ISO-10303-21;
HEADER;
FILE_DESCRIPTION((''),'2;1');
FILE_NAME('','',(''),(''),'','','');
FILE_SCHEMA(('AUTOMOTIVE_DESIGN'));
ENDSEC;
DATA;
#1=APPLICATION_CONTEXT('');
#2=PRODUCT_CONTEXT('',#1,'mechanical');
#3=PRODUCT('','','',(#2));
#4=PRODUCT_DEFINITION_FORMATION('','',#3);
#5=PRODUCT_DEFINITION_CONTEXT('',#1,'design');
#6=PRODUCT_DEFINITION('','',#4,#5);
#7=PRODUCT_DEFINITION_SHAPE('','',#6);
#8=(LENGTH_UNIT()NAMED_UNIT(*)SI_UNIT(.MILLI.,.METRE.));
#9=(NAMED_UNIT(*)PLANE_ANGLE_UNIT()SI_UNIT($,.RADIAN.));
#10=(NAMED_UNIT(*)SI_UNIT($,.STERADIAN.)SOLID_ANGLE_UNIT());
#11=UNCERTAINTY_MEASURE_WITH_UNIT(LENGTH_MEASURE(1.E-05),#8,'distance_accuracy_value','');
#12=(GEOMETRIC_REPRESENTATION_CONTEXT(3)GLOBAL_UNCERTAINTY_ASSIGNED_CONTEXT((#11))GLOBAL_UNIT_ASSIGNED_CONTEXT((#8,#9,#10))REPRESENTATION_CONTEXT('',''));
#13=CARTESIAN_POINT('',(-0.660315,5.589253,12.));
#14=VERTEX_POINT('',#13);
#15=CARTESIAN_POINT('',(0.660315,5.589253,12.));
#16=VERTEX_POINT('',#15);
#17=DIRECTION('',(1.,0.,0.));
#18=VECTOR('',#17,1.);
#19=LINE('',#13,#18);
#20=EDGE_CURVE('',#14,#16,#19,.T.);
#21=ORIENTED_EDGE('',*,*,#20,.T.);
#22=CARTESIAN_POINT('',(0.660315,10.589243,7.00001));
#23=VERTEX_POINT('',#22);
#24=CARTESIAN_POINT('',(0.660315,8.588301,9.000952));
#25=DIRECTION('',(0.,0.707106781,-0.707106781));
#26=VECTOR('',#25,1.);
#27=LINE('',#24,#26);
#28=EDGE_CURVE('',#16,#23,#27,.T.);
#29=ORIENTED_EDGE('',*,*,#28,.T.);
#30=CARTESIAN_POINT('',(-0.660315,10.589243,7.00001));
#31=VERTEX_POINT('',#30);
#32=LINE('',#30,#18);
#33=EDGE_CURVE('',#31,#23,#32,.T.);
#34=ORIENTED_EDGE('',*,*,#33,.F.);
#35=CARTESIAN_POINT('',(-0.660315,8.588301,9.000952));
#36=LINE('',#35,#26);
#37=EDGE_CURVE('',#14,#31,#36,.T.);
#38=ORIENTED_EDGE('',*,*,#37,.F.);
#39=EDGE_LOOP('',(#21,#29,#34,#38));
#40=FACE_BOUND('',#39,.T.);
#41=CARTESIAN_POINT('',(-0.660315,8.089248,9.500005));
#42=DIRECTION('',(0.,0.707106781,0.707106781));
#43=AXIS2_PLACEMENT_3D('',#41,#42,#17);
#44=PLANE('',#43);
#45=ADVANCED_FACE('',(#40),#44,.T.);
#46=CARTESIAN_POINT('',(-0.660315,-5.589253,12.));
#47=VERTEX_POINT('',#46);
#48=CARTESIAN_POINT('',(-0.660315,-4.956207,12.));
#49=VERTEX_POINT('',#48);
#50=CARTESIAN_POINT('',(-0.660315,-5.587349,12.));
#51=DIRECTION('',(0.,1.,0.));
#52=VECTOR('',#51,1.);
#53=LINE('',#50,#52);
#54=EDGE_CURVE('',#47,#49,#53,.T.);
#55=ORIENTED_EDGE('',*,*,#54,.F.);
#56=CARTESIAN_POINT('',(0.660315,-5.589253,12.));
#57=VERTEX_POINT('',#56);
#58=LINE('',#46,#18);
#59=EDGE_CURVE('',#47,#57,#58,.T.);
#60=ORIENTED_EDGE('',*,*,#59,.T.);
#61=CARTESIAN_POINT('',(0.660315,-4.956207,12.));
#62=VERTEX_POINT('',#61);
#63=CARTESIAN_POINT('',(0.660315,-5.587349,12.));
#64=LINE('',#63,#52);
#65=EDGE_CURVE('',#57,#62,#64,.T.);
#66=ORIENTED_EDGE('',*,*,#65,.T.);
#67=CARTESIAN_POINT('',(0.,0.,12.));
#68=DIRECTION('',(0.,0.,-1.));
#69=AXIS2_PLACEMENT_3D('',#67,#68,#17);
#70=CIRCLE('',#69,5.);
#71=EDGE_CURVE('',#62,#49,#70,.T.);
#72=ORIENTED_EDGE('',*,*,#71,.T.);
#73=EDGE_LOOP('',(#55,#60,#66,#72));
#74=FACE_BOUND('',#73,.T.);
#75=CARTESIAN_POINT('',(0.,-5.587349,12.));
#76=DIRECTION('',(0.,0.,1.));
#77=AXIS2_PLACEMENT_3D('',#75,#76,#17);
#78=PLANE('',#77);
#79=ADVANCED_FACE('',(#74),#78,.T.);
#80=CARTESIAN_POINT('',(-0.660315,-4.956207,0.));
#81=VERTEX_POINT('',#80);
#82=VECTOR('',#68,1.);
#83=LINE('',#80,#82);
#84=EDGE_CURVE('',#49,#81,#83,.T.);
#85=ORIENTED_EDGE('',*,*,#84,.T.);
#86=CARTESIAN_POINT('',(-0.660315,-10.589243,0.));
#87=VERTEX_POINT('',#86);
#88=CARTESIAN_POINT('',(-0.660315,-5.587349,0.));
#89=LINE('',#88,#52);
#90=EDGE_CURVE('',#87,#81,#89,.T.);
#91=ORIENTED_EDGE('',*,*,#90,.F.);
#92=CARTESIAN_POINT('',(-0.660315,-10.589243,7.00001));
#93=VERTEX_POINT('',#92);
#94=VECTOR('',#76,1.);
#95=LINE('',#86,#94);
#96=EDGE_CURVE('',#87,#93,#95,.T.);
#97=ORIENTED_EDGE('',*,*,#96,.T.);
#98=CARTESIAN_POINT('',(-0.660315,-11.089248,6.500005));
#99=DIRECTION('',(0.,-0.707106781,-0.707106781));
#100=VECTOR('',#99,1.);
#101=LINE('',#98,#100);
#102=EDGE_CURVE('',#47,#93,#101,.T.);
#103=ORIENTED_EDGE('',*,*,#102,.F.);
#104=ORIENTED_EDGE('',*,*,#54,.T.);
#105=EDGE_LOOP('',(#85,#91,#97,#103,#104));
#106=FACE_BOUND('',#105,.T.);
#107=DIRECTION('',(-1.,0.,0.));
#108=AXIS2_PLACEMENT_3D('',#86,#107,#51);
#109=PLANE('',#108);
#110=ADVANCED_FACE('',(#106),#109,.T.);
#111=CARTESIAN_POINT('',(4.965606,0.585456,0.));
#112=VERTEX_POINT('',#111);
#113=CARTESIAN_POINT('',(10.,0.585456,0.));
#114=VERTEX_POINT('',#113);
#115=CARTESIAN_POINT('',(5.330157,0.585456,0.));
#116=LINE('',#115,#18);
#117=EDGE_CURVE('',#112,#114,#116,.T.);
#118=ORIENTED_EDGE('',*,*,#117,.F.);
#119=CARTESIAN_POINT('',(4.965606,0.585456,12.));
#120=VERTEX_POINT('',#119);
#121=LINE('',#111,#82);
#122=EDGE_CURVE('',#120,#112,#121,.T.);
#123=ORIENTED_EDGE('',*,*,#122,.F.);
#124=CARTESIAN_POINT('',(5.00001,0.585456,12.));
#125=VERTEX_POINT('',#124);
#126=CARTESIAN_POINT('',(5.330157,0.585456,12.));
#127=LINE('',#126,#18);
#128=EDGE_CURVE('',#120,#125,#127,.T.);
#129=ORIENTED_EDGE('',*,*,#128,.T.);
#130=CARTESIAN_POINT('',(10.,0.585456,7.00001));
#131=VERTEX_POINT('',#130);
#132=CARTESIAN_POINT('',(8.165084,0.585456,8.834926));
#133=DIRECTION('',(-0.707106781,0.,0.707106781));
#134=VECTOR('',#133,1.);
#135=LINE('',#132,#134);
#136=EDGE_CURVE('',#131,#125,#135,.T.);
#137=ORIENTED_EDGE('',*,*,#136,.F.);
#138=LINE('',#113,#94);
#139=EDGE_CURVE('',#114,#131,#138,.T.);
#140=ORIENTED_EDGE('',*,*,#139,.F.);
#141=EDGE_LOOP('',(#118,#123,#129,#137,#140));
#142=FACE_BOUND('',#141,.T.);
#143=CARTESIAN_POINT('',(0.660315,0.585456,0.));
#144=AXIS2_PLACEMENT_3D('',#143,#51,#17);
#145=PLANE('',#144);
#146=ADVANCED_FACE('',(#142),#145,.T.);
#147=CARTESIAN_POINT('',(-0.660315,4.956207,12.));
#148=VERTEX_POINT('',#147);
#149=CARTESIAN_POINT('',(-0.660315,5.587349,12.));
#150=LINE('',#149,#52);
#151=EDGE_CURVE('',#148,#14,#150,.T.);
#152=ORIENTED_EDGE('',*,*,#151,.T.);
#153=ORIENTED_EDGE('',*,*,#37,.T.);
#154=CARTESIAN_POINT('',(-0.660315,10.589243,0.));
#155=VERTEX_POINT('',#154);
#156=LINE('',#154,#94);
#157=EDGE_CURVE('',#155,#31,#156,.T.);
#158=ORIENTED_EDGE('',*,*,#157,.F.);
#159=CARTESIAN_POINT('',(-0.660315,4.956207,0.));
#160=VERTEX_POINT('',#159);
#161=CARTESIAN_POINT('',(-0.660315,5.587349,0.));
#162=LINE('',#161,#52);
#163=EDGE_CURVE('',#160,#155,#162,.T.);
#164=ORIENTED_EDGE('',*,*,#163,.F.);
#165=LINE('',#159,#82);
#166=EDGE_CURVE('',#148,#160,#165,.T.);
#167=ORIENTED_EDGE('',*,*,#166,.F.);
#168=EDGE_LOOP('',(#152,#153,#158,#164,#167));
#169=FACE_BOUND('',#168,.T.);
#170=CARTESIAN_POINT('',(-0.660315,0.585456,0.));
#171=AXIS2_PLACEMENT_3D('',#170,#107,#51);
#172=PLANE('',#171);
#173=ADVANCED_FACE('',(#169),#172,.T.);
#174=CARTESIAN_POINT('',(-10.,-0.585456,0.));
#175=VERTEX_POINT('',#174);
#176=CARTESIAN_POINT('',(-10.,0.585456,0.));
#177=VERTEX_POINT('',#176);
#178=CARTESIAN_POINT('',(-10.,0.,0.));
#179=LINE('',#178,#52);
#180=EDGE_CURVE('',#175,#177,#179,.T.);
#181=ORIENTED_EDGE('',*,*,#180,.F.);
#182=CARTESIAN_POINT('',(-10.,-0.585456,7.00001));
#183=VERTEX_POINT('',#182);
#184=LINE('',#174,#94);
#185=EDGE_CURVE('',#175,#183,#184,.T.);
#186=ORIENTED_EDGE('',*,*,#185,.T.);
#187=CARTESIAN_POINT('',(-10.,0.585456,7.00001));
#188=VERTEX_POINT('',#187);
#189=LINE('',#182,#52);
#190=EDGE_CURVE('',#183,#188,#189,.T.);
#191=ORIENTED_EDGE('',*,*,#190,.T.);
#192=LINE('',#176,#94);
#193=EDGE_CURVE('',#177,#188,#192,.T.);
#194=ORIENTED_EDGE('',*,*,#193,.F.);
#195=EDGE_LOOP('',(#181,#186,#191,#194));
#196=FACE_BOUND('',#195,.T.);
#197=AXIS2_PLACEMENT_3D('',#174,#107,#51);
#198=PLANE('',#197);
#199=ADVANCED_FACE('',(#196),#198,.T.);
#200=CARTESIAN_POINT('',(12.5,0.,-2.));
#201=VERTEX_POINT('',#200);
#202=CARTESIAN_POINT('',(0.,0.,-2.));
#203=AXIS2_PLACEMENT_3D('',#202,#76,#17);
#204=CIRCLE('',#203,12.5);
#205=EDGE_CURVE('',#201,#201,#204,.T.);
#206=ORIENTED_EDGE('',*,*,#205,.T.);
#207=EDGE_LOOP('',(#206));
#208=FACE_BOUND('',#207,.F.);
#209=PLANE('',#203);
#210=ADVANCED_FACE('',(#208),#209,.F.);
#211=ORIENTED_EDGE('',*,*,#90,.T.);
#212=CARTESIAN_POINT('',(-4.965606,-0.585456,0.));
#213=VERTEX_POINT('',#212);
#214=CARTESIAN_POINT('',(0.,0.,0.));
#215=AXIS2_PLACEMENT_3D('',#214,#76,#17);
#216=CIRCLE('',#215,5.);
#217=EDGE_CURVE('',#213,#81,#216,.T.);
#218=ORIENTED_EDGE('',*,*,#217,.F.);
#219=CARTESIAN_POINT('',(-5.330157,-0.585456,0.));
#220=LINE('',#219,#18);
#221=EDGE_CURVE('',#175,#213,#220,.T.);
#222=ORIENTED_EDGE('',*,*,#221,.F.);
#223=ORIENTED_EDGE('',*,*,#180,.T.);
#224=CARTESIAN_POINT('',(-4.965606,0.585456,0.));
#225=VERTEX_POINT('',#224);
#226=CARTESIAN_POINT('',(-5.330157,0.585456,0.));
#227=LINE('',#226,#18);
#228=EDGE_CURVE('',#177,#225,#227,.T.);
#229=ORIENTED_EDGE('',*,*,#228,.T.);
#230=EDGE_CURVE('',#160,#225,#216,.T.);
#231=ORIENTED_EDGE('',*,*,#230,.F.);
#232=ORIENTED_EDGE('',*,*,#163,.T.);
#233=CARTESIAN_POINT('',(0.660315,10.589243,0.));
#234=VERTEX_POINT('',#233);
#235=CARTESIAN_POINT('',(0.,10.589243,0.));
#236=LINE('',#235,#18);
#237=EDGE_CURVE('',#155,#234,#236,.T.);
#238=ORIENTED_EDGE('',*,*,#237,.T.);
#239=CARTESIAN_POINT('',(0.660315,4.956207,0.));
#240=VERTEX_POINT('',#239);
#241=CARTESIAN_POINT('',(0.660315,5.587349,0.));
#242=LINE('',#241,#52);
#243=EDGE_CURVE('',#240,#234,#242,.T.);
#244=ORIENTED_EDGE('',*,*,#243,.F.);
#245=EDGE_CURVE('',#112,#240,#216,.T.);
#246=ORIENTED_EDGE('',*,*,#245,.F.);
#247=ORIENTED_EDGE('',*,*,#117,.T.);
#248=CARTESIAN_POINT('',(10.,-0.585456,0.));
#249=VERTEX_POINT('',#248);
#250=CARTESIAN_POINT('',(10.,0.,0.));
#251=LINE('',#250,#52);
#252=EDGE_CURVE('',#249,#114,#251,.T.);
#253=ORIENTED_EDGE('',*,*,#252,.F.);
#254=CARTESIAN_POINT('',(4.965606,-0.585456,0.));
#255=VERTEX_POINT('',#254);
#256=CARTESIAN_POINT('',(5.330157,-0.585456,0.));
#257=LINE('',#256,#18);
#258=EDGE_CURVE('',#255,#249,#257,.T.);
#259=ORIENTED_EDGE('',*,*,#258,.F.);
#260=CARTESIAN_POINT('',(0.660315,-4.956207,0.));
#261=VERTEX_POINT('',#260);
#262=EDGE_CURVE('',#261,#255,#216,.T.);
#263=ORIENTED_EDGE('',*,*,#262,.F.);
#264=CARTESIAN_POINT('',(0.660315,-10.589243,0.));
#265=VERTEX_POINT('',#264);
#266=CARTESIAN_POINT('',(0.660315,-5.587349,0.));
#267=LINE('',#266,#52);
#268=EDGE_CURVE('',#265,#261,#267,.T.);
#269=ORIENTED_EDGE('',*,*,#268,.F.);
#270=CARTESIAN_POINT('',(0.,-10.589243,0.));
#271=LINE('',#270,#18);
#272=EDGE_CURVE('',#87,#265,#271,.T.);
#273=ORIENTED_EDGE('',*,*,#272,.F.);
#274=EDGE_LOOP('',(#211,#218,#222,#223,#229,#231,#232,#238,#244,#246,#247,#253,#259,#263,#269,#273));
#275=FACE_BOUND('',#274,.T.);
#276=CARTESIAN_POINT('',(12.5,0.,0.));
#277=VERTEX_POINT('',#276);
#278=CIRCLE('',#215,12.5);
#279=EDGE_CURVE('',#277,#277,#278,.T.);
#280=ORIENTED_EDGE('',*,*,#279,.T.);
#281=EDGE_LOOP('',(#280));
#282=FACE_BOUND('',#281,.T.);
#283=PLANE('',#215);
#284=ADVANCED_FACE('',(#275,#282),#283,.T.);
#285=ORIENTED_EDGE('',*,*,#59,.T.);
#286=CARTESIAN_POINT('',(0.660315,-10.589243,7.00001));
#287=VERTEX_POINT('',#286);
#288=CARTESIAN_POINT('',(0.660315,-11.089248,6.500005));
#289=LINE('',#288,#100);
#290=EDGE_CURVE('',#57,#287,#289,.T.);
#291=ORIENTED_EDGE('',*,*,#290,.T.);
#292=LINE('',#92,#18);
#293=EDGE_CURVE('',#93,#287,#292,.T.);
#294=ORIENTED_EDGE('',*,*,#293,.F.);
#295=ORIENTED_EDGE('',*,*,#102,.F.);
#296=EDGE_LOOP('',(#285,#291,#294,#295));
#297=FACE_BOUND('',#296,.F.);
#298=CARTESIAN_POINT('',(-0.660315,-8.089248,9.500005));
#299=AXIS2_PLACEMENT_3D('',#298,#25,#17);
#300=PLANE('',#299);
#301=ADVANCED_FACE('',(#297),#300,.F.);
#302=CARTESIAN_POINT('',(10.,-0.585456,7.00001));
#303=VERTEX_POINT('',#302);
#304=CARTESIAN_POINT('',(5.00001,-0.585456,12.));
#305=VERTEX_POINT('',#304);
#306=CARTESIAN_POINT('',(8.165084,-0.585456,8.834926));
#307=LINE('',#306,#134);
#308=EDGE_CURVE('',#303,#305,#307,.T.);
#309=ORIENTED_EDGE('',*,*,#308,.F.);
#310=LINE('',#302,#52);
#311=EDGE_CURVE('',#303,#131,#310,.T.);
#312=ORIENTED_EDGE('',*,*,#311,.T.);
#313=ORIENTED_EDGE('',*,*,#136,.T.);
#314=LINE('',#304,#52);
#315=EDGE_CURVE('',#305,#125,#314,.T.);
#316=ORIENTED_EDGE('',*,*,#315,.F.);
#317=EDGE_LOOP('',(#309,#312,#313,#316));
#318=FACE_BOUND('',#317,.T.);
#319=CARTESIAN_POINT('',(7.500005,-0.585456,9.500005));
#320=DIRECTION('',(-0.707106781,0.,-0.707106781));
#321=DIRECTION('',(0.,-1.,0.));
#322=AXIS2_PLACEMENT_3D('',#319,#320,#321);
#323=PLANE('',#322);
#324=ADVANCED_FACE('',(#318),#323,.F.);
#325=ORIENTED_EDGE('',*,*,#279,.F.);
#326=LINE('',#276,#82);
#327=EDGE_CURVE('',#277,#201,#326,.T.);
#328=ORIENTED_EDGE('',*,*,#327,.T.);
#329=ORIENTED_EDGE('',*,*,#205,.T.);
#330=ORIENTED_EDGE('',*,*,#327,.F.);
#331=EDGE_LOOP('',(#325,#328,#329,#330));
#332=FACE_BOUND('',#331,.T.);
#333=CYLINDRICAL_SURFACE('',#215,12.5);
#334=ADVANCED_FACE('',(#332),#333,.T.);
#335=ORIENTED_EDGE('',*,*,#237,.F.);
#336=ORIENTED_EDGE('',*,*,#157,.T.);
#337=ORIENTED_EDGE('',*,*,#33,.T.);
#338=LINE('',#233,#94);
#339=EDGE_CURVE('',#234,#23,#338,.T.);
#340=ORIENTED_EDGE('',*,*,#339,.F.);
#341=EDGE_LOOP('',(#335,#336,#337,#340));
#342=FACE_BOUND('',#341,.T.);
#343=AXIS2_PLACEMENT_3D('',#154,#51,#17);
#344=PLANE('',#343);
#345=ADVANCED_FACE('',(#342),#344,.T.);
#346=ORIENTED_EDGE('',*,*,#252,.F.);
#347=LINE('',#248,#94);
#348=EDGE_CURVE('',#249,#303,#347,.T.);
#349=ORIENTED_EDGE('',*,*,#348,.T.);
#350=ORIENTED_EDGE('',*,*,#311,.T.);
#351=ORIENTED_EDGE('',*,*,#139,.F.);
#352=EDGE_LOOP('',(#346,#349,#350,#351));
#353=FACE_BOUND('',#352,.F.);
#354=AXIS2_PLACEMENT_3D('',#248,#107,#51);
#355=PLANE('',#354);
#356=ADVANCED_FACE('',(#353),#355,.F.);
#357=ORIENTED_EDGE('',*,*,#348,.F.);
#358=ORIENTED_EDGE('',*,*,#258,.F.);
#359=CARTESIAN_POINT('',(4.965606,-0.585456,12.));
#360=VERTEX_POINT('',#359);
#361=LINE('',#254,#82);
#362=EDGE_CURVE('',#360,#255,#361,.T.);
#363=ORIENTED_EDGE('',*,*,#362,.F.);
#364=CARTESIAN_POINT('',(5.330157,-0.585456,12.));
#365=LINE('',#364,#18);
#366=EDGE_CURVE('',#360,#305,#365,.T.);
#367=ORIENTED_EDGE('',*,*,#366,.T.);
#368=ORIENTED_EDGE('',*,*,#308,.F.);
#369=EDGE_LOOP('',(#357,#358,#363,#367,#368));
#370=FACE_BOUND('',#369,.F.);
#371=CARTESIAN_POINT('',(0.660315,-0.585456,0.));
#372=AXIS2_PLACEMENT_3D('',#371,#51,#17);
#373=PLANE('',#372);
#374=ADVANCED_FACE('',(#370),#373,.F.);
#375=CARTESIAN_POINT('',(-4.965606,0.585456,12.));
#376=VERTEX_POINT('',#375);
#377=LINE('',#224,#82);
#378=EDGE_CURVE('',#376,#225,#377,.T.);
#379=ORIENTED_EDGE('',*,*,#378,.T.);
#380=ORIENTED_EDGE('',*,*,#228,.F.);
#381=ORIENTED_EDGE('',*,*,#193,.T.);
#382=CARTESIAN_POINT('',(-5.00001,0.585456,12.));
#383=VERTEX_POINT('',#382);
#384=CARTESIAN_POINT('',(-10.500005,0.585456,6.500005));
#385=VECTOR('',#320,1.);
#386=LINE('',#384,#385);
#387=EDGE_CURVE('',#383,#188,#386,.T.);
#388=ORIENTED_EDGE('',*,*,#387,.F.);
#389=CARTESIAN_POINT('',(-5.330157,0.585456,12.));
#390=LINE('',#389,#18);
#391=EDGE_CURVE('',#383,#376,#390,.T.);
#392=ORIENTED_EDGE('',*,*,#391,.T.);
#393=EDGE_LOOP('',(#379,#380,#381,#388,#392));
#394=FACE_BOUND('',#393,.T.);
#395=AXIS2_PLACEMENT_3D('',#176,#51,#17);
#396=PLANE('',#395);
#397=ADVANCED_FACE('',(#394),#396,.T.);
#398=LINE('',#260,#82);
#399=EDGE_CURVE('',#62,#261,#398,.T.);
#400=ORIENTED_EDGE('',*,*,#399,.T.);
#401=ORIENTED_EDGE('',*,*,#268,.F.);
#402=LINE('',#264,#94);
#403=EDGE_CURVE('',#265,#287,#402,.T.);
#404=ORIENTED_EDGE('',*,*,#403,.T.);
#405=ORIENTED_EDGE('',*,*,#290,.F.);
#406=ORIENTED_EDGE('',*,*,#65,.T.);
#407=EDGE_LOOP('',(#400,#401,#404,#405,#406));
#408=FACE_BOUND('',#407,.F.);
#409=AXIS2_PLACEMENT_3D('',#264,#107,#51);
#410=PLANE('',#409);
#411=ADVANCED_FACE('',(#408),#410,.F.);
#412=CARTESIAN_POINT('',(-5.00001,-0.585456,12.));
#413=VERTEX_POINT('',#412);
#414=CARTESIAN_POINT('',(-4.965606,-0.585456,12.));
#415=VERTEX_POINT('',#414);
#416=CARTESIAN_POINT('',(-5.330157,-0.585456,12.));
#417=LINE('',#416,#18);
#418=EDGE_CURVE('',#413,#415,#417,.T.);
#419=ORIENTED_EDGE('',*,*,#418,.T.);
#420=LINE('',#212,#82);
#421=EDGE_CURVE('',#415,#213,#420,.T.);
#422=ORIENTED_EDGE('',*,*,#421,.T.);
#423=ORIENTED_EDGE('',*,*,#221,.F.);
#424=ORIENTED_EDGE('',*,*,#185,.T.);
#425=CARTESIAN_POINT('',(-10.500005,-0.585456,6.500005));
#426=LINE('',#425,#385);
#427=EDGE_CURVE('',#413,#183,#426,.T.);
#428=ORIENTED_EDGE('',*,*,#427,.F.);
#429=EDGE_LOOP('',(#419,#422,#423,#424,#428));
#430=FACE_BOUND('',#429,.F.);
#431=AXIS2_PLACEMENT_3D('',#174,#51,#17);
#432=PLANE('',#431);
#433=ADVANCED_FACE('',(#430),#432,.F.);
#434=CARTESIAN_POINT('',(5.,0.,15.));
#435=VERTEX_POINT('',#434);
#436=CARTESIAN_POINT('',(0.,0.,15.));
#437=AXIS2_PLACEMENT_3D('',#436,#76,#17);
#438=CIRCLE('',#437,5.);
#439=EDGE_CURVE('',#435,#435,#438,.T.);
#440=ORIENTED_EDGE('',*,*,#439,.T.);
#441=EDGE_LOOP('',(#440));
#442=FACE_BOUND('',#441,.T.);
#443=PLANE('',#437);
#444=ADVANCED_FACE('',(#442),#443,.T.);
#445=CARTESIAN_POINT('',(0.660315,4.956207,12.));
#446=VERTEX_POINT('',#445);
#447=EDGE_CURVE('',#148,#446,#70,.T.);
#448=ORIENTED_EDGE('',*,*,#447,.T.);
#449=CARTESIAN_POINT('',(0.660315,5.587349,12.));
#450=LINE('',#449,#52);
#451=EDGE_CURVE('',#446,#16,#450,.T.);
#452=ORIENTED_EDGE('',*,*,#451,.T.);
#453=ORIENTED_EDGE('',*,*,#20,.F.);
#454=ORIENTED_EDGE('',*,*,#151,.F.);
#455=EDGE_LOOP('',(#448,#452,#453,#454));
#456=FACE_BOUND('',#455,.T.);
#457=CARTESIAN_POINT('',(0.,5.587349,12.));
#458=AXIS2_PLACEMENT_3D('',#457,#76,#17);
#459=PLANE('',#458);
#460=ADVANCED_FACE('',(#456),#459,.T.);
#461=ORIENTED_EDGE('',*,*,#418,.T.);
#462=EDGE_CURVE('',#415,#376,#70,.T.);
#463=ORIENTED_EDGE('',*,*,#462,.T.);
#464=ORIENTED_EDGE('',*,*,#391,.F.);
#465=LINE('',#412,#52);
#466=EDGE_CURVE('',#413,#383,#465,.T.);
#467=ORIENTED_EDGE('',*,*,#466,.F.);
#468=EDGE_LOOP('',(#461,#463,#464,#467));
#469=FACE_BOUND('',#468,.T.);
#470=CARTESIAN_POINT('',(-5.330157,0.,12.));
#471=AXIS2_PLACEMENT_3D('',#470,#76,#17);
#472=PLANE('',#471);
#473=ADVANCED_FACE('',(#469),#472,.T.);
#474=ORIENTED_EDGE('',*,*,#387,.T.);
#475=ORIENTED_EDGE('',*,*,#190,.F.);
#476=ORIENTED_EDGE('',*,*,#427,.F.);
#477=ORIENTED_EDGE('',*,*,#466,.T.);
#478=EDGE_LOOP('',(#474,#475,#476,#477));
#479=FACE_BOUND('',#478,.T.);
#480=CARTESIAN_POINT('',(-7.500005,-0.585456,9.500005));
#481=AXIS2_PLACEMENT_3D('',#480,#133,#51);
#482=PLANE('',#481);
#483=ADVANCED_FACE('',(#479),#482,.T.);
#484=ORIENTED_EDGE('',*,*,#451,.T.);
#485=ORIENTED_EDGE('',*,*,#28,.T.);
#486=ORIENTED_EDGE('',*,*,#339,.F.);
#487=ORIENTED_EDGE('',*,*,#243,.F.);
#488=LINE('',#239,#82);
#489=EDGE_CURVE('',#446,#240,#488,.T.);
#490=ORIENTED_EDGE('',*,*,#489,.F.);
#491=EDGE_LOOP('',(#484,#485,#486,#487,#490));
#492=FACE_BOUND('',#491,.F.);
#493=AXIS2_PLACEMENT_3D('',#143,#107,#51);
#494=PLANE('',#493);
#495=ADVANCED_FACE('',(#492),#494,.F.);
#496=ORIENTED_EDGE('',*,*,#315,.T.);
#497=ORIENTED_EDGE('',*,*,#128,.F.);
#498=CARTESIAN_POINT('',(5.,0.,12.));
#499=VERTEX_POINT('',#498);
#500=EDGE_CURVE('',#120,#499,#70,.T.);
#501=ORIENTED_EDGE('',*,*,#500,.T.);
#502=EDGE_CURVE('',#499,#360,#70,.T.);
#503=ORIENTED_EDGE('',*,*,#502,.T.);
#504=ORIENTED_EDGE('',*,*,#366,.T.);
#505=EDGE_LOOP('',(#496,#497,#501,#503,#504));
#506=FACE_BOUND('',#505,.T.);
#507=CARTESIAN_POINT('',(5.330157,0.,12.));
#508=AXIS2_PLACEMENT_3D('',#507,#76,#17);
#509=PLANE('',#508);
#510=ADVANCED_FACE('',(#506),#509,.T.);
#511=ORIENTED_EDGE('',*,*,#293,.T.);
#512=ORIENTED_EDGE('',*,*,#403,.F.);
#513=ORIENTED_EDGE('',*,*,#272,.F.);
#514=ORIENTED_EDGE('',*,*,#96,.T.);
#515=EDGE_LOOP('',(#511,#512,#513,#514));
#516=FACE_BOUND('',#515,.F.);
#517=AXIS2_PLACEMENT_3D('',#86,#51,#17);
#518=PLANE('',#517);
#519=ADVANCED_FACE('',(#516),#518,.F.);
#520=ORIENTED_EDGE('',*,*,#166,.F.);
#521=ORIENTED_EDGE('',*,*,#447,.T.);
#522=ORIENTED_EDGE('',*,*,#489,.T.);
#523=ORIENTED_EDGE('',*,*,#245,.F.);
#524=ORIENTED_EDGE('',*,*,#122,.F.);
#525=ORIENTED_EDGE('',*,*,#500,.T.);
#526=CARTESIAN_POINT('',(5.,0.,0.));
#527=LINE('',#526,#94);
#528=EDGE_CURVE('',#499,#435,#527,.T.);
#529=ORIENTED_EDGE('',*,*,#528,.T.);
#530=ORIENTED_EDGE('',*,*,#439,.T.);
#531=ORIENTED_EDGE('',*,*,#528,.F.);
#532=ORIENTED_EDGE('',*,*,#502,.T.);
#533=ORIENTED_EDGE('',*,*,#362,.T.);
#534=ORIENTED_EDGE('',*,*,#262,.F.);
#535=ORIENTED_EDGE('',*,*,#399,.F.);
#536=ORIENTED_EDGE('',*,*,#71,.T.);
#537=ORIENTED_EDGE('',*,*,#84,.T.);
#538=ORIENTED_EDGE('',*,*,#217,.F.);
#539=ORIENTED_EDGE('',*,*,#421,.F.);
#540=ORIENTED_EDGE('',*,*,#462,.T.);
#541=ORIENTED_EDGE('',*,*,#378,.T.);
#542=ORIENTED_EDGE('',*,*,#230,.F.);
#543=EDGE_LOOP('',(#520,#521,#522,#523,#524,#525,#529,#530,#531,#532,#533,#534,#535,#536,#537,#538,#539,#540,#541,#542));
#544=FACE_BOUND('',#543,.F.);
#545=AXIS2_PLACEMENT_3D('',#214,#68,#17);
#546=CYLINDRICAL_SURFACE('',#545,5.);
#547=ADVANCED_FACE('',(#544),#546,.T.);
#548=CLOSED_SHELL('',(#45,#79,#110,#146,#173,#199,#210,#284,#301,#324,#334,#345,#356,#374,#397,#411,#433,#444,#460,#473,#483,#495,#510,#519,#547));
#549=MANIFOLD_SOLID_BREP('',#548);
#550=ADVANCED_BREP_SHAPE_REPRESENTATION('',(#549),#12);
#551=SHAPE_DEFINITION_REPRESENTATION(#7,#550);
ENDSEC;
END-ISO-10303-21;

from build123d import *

# Parameters (mm, degrees)
F0_R     = 5
F2_DEPTH = 15
F1_W     = 9.3396854261
F1_H     = 1.1709111985
F1_W_2   = 1.3206291478
F1_H_2   = 10.0037873136
F3_DEPTH = 12
F4_SIZE  = 4.99999
F5_R     = 12.5
F6_DEPTH = 2


# Not quite as in the source:
# - a fillet or chamfer is up to 0.001 mm smaller than in the source, because OpenCascade refuses the exact size


with BuildPart() as f2:
    # F0 (on Top) → F2 (new body)
    with BuildSketch(Plane.XY):
        Circle(F0_R)
    extrude(amount=F2_DEPTH)

    # F1 (on Top) → F3 (join)
    with BuildSketch(Plane.XY):
        with Locations((5.330157287, 0)):
            Rectangle(F1_W, F1_H)
        with Locations((-5.330157287, 0)):
            Rectangle(F1_W, F1_H)
        with Locations((0, 5.587349256)):
            Rectangle(F1_W_2, F1_H_2)
        with Locations((0, -5.587349256)):
            Rectangle(F1_W_2, F1_H_2)
    extrude(amount=F3_DEPTH)

    # F4 (size 5 in the source; OpenCascade refuses exactly that, so slightly less here)
    f4_edges = [f2.edges().sort_by_distance(p)[0] for p in [
        (0, 10.589243, 12),
        (10, 0, 12),
        (0, -10.589243, 12),
        (-10, 0, 12),
    ]]
    chamfer(f4_edges, length=F4_SIZE)

    # F5 (on Top) → F6 (join)
    with BuildSketch(Plane.XY):
        Circle(F5_R)
    extrude(amount=-F6_DEPTH)


solid = f2.part
